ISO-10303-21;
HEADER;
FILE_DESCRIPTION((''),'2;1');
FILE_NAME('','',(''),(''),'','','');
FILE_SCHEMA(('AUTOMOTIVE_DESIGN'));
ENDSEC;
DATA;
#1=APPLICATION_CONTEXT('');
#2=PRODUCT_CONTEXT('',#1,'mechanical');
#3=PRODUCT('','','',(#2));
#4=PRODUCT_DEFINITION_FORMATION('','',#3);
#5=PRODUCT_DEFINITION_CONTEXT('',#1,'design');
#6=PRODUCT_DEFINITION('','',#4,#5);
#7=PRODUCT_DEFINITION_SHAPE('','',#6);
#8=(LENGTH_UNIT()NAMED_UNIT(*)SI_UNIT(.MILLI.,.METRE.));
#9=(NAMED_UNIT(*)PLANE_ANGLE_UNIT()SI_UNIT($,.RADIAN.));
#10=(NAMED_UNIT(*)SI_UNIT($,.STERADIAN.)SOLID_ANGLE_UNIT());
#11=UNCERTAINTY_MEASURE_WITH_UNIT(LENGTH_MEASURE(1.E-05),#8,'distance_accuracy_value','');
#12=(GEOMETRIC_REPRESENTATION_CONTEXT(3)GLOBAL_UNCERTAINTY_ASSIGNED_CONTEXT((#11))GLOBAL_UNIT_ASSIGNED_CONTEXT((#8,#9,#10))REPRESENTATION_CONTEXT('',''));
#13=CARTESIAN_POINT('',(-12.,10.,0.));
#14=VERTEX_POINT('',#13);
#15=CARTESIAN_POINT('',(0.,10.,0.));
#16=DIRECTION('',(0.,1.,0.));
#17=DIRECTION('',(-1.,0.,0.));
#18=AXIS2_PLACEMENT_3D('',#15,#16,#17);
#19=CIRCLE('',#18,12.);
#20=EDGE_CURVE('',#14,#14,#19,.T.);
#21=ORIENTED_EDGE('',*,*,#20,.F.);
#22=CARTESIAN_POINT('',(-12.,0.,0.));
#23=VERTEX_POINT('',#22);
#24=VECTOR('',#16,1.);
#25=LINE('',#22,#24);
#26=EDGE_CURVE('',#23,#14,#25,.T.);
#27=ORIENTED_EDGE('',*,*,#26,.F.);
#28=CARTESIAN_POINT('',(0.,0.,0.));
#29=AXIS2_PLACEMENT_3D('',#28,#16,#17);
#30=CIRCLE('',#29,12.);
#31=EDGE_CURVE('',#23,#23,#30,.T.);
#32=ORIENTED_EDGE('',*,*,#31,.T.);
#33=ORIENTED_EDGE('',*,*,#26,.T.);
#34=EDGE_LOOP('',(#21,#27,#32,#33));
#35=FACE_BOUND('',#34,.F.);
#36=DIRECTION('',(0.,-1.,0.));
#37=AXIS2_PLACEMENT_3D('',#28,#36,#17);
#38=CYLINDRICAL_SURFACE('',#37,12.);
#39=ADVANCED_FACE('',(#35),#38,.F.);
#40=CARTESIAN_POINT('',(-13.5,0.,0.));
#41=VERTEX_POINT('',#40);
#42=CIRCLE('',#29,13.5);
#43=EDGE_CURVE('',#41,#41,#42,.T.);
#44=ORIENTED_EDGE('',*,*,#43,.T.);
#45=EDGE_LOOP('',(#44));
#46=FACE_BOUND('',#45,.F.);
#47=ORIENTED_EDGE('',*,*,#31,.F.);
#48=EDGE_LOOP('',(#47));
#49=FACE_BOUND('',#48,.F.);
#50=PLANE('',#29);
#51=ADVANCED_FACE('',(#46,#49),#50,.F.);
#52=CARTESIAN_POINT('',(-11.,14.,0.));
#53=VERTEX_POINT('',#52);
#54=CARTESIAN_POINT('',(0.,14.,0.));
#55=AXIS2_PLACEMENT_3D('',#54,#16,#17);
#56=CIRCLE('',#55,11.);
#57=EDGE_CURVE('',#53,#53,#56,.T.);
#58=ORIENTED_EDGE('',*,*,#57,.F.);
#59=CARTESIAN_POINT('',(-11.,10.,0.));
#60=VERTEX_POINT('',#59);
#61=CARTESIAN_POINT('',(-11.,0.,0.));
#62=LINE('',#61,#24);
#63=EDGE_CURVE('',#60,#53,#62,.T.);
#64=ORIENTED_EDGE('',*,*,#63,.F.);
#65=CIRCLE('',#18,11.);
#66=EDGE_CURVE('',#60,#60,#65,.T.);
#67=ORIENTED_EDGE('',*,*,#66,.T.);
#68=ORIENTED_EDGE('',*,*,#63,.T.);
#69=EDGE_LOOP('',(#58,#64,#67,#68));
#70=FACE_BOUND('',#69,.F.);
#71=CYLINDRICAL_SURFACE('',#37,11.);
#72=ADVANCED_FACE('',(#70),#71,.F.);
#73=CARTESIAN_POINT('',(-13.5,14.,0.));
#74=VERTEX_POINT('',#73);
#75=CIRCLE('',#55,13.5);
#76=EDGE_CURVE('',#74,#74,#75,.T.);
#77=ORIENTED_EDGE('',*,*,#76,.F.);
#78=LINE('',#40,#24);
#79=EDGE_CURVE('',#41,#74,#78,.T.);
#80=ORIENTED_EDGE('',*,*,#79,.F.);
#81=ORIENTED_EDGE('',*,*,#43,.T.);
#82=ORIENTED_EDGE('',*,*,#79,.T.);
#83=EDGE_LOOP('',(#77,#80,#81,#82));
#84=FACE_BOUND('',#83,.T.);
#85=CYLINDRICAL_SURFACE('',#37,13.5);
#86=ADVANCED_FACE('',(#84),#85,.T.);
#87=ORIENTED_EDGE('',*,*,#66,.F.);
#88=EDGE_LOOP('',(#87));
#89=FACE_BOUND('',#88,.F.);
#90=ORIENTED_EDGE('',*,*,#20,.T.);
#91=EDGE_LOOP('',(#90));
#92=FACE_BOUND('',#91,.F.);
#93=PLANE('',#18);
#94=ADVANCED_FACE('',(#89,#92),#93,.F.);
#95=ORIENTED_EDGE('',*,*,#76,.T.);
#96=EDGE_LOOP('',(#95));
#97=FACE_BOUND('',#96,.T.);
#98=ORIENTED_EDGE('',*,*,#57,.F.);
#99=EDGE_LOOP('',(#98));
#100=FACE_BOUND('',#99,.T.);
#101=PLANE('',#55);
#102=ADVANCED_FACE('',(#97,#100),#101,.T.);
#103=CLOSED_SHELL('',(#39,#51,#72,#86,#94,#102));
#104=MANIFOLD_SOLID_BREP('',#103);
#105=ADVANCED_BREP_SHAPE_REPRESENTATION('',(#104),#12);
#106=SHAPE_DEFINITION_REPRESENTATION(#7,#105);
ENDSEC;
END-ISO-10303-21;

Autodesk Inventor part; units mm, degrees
ref_plane "YZ Plane" through (0, 0, 0) normal (1, 0, 0) x (0, 1, 0)
ref_plane "XZ Plane" through (0, 0, 0) normal (0, 1, 0) x (-1, 0, 0)
ref_plane "XY Plane" through (0, 0, 0) normal (0, 0, 1) x (1, 0, 0)
sketch "Sketch1" plane through (0, 0, 0) normal (0, 1, 0) x (-1, 0, 0)
  circle A0 centre (0, 0) radius 13.5
  circle A1 centre (0, 0) radius 12
  circle A2 centre (0, 0) radius 11
  dimension "d0" = 27
  dimension "d1" = 24
  dimension "d4" = 22
extrude "Extrusion1" add sketch "Sketch1" along normal blind 14 contours A0 | A1
extrude "Extrusion2" cut sketch "Sketch1" along normal blind 10 contours A1
thread "Thread1" size "M22x0.75" class "6H" standard "ANSI Metric M Profile" full length
properties part number "Top Nut" material "ABS Plastic"
